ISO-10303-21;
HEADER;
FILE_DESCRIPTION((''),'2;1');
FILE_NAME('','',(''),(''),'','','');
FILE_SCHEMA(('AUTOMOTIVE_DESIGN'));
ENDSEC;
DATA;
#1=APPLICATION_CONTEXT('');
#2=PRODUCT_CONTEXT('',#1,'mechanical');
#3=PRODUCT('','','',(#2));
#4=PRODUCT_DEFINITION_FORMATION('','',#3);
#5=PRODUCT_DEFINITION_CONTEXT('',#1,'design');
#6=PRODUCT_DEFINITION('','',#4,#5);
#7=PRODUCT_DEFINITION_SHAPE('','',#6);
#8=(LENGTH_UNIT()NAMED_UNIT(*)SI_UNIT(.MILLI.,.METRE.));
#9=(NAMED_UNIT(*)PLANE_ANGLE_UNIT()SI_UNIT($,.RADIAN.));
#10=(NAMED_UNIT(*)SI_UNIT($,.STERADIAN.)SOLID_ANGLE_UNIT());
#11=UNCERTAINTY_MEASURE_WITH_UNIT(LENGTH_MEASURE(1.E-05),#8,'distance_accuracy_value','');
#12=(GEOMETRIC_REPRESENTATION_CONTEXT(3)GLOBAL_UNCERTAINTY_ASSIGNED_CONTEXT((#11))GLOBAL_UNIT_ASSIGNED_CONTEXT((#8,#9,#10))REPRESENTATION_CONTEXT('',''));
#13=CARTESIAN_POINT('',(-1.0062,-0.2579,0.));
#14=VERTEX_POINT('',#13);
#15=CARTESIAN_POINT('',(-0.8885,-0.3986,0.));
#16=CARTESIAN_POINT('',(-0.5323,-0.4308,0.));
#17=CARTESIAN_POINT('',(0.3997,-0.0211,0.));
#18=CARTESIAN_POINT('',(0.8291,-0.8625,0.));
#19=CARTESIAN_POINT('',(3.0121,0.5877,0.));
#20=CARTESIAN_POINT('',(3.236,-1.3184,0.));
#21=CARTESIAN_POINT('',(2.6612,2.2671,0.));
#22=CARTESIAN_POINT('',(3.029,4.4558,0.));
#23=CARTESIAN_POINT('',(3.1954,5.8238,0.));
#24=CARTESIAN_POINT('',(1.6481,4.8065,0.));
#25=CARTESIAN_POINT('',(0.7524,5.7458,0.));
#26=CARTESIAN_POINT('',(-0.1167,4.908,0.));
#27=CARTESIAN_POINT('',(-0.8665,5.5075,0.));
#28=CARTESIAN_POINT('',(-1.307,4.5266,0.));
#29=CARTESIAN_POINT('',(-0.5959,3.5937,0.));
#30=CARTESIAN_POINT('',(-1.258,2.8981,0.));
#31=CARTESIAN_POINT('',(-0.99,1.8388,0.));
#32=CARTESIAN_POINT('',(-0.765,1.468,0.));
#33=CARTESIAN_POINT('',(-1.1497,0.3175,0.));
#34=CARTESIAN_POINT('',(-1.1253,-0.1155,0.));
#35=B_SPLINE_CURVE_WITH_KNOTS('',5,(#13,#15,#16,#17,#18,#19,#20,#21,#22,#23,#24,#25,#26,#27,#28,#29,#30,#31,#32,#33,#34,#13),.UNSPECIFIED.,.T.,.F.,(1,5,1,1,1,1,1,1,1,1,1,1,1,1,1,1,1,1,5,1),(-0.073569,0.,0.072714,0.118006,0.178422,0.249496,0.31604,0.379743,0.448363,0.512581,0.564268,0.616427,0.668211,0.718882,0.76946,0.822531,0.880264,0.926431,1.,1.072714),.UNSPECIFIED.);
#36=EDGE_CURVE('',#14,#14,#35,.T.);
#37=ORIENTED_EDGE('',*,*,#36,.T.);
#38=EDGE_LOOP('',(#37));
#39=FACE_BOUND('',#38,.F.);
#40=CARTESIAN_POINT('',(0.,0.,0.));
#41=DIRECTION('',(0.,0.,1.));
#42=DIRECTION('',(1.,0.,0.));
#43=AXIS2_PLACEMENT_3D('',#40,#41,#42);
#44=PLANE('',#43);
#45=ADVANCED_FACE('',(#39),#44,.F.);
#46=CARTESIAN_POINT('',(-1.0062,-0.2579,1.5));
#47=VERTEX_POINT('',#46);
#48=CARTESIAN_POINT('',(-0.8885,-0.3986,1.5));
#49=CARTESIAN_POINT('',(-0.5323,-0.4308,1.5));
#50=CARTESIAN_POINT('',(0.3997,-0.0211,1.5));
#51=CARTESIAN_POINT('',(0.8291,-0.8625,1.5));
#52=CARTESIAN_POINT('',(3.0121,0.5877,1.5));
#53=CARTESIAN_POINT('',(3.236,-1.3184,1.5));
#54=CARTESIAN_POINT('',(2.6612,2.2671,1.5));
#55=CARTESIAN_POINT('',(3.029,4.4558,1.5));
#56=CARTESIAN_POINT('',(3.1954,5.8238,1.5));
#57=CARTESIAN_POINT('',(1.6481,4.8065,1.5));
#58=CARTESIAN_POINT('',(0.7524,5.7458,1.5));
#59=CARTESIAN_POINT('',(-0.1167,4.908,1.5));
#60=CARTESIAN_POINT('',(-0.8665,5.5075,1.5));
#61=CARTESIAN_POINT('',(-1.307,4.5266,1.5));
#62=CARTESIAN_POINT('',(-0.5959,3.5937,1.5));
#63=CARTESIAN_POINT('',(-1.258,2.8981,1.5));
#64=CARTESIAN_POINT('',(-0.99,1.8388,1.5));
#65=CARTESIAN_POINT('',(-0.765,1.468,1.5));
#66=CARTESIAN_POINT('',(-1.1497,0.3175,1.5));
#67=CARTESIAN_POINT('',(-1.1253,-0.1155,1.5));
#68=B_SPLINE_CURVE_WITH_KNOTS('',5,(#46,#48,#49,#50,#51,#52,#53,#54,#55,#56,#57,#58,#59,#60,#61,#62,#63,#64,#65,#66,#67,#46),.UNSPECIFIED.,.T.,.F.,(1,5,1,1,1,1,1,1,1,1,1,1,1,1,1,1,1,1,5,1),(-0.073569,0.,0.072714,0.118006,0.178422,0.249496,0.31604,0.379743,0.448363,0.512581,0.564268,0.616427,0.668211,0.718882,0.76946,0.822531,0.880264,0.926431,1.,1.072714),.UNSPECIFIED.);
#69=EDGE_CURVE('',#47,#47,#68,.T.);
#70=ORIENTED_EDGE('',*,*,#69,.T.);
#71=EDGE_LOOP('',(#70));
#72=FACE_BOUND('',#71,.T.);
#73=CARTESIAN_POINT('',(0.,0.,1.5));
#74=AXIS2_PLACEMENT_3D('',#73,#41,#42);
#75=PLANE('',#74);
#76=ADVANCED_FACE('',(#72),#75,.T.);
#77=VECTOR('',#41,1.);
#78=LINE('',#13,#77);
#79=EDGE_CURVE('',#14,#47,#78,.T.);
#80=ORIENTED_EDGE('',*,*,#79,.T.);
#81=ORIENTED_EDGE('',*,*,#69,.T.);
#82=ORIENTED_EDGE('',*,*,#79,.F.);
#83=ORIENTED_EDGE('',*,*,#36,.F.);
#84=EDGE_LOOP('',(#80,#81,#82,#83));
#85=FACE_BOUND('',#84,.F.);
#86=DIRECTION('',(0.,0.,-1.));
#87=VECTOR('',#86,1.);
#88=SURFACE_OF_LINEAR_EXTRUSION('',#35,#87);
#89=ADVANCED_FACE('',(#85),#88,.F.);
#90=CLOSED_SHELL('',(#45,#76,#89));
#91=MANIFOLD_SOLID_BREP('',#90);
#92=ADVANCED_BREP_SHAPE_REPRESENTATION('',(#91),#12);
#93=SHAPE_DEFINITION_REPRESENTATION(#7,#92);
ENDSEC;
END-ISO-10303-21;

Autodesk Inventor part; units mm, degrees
ref_plane "YZ Plane" through (0, 0, 0) normal (1, 0, 0) x (0, 1, 0)
ref_plane "XZ Plane" through (0, 0, 0) normal (0, 1, 0) x (-1, 0, 0)
ref_plane "XY Plane" through (0, 0, 0) normal (0, 0, 1) x (1, 0, 0)
ref_plane "РабПлоскость3" through (0, 0, 0) normal (0, 0, 1) x (1, 0, 0)
sketch "Эскиз4" plane through (0, 0, 0) normal (0, 0, 1) x (1, 0, 0)
  spline S0 degree 5 poles (-1.0062, -0.2579) (-0.8885, -0.3986) (-0.5323, -0.4308) (0.3997, -0.0211) (0.8291, -0.8625) (3.0121, 0.5877) (3.236, -1.3184) (2.6612, 2.2671) (3.029, 4.4558) (3.1954, 5.8238) (1.6481, 4.8065) (0.7524, 5.7458) (-0.1167, 4.908) (-0.8665, 5.5075) (-1.307, 4.5266) (-0.5959, 3.5937) (-1.258, 2.8981) (-0.99, 1.8388) (-0.765, 1.468) (-1.1497, 0.3175) (-1.1253, -0.1155) (-1.0062, -0.2579) knots 0 0 0 0 0 0 0.072714 0.118006 0.178422 0.249496 0.31604 0.379743 0.448363 0.512581 0.564268 0.616427 0.668211 0.718882 0.76946 0.822531 0.880264 0.926431 1 1 1 1 1 1
  point P0 (0, 0)
  point P1 (1.0511, -0.3464)
  point P2 (2.6452, -0.1216)
  point P3 (2.9926, -0.1966)
  point P4 (2.8972, 1.4861)
  point P5 (2.9926, 4.8786)
  point P6 (2.7065, 5.2874)
  point P7 (1.6574, 5.2329)
  point P8 (0.6287, 5.3623)
  point P9 (-0.2024, 5.1988)
  point P10 (-0.7882, 5.1511)
  point P11 (-1.0539, 4.6606)
  point P12 (-0.9041, 3.6865)
  point P13 (-1.0539, 2.8486)
  point P14 (-1.0062, 2.0174)
  point P15 (-0.9585, 1.0569)
extrude "Выдавливание4" add sketch "Эскиз4" along normal blind 1.5
properties part number "SOIC-10 micro (RM-10) board"
